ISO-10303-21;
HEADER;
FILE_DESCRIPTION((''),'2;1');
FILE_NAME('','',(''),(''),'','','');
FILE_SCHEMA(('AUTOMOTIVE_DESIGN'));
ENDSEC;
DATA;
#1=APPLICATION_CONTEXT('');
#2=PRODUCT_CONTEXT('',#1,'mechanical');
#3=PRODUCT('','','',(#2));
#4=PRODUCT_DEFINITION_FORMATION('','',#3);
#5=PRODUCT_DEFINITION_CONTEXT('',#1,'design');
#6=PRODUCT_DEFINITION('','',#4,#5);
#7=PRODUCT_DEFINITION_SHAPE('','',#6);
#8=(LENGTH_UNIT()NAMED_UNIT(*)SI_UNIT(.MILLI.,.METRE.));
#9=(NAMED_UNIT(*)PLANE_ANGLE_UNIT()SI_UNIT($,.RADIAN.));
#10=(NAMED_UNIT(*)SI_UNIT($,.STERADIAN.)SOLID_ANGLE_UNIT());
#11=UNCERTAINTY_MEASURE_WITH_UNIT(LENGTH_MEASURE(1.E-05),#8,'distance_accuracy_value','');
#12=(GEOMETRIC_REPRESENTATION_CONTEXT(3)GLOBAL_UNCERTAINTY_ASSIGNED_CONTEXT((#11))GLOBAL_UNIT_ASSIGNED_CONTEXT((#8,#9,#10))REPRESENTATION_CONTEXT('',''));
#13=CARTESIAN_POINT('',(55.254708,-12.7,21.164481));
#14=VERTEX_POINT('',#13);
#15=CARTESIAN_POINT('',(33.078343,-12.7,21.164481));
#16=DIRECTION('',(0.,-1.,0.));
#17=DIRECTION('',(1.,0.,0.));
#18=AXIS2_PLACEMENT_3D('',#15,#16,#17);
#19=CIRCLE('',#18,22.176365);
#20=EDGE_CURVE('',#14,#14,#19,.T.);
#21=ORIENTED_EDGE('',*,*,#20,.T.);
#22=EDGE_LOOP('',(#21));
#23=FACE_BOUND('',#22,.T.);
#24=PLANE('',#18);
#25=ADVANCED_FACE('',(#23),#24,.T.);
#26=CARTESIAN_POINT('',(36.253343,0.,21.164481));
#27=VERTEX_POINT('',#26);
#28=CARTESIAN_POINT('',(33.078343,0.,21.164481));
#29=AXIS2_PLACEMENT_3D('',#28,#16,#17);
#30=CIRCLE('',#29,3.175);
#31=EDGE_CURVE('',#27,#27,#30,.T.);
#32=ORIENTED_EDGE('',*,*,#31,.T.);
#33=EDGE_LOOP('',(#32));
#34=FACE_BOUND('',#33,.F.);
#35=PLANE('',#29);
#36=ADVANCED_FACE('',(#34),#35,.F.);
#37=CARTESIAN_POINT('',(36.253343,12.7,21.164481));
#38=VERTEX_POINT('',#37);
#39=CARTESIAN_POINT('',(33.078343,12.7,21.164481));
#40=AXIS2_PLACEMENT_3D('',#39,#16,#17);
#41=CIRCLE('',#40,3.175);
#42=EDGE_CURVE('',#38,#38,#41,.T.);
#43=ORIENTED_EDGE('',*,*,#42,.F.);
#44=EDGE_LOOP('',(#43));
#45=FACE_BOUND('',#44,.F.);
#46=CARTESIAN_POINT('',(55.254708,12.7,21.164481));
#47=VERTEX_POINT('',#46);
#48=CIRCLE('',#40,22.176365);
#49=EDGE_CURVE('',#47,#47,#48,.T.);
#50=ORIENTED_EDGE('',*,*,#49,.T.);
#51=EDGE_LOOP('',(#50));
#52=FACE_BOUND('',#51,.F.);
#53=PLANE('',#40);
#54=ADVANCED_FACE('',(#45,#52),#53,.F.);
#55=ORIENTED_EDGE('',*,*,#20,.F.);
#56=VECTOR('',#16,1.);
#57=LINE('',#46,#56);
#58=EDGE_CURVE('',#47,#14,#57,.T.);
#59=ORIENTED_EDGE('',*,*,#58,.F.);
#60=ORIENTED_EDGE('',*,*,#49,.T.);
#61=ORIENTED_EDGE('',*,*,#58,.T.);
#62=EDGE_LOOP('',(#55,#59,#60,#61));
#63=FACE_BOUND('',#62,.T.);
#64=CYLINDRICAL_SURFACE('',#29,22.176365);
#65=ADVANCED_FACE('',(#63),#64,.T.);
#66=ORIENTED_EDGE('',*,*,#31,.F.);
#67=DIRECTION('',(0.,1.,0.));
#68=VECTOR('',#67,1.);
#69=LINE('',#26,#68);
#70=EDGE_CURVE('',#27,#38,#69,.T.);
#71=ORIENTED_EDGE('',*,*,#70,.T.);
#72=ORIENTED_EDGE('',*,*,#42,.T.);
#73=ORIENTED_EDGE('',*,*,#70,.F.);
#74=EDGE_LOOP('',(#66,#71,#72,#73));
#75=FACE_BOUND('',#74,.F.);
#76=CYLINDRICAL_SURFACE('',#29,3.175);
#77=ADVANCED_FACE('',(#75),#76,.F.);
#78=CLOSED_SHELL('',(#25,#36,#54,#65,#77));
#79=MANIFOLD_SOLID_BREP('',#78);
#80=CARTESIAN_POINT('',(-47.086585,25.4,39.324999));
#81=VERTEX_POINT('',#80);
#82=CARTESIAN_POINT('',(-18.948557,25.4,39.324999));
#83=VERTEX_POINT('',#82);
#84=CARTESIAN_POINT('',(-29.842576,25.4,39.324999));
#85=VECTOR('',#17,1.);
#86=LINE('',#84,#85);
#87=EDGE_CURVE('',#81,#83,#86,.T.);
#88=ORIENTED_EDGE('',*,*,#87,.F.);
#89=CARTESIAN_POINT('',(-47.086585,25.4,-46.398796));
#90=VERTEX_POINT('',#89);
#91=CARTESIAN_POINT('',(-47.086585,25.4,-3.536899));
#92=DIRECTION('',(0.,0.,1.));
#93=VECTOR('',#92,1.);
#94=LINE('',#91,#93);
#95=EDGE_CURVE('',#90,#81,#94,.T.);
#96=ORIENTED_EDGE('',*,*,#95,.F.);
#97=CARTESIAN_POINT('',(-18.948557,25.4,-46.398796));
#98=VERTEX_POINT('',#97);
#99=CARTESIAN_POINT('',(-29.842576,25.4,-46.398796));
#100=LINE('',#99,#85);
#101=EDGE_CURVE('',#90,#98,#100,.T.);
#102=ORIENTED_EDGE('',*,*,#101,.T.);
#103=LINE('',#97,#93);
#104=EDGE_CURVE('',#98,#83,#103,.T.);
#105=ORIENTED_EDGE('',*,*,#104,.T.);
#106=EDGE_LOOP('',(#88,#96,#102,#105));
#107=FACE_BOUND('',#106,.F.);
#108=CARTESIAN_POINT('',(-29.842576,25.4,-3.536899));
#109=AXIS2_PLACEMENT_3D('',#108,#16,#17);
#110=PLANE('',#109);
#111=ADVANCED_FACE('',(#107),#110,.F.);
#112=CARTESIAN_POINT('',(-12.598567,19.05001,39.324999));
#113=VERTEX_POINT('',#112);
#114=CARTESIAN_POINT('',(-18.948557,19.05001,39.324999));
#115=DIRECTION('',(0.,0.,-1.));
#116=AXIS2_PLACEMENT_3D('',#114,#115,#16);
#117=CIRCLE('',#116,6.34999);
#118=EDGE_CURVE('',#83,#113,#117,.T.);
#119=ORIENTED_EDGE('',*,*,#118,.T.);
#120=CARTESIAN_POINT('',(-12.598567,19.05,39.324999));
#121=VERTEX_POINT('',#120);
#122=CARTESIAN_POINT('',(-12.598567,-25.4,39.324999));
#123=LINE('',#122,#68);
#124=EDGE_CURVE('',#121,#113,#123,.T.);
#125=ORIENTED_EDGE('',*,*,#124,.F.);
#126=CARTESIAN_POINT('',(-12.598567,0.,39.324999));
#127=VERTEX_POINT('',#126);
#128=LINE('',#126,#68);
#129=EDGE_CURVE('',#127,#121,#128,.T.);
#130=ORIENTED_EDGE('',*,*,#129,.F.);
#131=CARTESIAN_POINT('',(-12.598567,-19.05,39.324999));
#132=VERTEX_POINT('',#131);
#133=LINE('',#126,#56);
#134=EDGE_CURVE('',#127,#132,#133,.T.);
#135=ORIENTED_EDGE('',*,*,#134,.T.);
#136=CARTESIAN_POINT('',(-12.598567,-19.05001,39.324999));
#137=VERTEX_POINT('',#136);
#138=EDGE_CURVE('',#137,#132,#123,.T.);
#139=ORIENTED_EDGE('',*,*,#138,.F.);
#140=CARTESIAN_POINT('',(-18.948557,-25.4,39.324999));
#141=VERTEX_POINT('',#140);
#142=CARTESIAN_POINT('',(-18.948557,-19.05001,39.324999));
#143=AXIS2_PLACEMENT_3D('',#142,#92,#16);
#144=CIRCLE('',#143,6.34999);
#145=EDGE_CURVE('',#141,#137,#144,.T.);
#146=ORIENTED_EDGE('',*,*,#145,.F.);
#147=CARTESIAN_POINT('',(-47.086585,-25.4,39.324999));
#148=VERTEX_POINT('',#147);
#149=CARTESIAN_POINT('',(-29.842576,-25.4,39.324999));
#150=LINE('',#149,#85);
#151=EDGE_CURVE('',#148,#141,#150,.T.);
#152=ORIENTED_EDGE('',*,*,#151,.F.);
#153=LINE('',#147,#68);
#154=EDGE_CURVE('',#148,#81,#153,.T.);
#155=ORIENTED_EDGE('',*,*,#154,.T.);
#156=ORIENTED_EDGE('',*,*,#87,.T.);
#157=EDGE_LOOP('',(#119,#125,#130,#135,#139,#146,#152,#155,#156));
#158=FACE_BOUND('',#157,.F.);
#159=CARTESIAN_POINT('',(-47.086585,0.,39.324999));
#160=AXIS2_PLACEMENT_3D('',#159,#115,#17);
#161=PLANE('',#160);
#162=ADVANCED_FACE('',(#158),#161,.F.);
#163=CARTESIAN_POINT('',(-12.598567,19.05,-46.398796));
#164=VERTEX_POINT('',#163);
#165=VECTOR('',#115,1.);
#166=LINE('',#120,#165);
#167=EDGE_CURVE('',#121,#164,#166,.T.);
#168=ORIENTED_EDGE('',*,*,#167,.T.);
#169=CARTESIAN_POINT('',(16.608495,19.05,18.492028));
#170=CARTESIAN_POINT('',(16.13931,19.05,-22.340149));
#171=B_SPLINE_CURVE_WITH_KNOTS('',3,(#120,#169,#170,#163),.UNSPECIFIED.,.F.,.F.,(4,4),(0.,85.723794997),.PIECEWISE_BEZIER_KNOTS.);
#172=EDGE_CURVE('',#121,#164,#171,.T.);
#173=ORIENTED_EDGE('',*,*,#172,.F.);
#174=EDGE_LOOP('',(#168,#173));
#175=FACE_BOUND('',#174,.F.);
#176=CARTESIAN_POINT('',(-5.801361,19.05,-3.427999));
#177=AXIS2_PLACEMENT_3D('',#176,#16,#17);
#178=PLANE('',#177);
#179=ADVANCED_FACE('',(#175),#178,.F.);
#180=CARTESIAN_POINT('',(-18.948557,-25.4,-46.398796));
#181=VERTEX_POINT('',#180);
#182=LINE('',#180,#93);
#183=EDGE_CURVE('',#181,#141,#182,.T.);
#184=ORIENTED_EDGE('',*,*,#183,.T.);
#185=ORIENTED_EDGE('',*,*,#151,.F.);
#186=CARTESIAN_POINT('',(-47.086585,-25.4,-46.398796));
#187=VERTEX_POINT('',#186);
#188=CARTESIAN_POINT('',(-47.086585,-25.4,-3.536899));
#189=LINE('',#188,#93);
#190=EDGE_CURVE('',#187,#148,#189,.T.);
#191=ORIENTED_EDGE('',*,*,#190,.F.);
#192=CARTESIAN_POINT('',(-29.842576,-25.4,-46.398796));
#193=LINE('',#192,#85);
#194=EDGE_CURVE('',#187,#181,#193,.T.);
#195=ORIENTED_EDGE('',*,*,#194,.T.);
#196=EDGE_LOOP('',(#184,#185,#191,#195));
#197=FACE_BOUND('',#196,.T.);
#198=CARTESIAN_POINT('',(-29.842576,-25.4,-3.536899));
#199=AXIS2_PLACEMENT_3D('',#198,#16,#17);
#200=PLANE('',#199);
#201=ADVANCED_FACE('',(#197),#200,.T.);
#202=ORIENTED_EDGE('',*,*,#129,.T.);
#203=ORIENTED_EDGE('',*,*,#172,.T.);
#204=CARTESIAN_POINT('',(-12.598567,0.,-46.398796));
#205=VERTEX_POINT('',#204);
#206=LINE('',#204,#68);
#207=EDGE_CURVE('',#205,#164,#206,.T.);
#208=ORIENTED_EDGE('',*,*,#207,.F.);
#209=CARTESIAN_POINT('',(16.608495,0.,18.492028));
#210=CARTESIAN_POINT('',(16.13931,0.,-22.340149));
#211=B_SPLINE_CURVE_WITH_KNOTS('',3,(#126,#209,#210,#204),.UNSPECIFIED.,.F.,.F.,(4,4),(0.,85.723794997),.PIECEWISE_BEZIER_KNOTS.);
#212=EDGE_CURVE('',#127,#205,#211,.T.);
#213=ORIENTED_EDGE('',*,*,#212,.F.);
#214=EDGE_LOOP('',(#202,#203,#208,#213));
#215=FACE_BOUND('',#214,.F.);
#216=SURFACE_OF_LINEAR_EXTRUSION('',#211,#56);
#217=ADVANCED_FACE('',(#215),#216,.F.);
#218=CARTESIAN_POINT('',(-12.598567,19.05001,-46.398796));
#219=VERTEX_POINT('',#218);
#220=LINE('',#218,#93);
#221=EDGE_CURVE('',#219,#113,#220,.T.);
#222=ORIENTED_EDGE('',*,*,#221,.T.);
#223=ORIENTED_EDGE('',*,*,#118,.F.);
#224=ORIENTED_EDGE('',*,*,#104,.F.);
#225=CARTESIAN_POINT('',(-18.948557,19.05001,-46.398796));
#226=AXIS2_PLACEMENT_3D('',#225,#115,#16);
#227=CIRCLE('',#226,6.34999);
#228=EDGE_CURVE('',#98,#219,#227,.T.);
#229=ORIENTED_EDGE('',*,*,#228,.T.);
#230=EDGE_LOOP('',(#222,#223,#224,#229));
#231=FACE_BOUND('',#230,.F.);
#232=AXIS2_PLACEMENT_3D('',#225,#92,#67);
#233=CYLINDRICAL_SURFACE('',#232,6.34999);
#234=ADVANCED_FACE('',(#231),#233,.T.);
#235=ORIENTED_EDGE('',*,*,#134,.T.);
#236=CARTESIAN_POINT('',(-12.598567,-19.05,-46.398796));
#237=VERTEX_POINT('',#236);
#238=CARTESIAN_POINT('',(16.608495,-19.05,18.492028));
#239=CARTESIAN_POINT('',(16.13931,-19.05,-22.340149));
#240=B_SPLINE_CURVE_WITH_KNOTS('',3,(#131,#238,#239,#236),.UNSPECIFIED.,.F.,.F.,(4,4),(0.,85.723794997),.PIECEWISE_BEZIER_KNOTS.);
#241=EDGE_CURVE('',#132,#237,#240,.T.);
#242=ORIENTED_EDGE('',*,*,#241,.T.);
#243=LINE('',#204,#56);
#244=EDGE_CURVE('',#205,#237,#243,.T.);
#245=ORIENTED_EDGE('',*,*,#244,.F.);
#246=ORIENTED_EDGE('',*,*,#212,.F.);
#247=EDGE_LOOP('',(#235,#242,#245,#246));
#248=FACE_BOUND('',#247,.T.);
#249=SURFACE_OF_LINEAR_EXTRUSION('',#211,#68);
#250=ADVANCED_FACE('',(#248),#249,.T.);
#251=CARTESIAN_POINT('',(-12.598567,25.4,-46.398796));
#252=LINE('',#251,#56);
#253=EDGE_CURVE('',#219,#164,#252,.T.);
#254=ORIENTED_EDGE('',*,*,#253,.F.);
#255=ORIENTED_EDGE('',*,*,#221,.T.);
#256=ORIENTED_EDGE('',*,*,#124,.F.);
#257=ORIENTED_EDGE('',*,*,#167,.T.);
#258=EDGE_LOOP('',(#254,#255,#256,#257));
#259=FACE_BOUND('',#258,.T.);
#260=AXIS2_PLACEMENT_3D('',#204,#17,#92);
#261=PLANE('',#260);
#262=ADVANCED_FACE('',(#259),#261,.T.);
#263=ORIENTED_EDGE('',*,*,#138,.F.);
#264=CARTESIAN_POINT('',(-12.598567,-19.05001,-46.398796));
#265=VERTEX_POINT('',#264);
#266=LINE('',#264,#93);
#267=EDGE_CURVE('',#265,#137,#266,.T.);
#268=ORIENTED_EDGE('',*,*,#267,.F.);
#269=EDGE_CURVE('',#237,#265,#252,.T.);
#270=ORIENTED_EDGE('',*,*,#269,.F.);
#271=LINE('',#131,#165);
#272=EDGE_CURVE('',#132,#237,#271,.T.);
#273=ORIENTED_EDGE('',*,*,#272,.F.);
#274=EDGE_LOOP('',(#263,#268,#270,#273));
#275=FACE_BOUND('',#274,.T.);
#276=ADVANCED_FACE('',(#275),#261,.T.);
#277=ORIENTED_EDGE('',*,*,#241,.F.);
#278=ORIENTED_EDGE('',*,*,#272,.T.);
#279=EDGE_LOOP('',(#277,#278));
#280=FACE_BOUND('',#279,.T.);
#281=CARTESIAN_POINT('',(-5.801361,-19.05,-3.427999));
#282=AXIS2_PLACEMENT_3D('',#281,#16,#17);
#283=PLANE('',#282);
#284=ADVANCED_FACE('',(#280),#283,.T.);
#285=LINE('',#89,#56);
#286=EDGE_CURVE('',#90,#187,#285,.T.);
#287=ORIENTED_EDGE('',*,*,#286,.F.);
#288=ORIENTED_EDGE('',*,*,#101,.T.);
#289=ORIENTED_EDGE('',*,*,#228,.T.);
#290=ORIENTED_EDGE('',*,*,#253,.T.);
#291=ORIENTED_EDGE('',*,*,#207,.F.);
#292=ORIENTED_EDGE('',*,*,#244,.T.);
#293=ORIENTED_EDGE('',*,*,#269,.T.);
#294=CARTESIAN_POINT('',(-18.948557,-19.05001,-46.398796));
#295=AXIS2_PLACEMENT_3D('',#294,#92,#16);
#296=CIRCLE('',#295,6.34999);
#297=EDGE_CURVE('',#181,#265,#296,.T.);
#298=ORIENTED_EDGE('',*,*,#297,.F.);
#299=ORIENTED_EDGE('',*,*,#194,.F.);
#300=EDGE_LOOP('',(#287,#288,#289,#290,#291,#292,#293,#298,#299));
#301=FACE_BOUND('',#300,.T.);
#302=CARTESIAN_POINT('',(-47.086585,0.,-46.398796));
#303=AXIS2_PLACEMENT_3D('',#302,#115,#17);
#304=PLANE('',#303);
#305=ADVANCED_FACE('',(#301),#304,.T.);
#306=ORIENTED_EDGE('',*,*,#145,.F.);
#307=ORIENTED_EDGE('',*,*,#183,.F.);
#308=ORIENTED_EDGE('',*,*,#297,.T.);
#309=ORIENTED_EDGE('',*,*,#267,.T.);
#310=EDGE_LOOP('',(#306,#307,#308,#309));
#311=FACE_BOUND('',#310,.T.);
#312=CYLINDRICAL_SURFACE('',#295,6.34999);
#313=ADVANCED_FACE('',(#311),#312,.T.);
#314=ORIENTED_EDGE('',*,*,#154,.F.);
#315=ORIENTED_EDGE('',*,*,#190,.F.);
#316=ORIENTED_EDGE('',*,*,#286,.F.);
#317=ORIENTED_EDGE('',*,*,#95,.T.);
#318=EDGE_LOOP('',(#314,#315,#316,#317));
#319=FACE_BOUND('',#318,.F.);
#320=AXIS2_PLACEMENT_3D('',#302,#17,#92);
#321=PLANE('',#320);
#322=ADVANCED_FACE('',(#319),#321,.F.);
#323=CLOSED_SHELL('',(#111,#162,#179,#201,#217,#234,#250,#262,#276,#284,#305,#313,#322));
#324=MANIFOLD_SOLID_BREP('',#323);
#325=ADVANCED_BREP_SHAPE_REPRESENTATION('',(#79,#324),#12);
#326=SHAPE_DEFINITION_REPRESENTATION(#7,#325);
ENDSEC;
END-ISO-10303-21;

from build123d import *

# Parameters (mm, degrees)
F0_W     = 34.4880186021
F0_H     = 85.7237949967
F1_DEPTH = 25.4
F2_DEPTH = 19.05
F3_R     = 6.34999
F0_R     = 22.1763652159
F0_R_2   = 9.4763652159
F4_DEPTH = 12.7
F5_DEPTH = 12.7
F6_D     = 6.35
F6_DEPTH = 25.401


# Not quite as in the source:
# - a fillet or chamfer is up to 0.001 mm smaller than in the source, because OpenCascade refuses the exact size


with BuildPart() as f1:
    # F0 (on Front) → F1 (new body, symmetric)
    with BuildSketch(Plane.XZ):
        with Locations((-29.842576012, -3.5368986428)):
            Rectangle(F0_W, F0_H)
    extrude(amount=F1_DEPTH, both=True)

    # F0 (on Front) → F2 (join, symmetric)
    with BuildSketch(Plane.XZ):
        with BuildLine():
            Line((-12.5985667109, 39.3249988556), (-12.5985667109, -46.3987961411))
            add(Edge.make_bspline(
                [(-12.5985667109, 39.3249988556), (16.6084952652, 18.4920281172), (16.1393098533, -22.3401486874), (-12.5985667109, -46.3987961411)],
                knots=[0, 0, 0, 0, 85.7237949967, 85.7237949967, 85.7237949967, 85.7237949967], degree=3))
        make_face()
    extrude(amount=F2_DEPTH, both=True)

    # F3 (radius 6.35 in the source; OpenCascade refuses exactly that, so slightly less here)
    f3_edges = [f1.edges().sort_by_distance(p)[0] for p in [
        (-12.598567, -25.4, -3.536899),
        (-12.598567, 25.4, -3.536899),
    ]]
    fillet(f3_edges, radius=F3_R)


with BuildPart() as f4:
    # F0 (on Front) → F4 (new body, symmetric)
    with BuildSketch(Plane.XZ):
        with Locations((33.0783426762, 21.1644805968)):
            Circle(F0_R)
        with Locations((33.0783426762, 21.1644805968)):
            Circle(F0_R_2, mode=Mode.SUBTRACT)
    extrude(amount=F4_DEPTH, both=True)

    # F0 (on Front) → F5 (join, symmetric)
    with BuildSketch(Plane.XZ):
        with Locations((33.0783426762, 21.1644805968)):
            Circle(F0_R_2)
    extrude(amount=F5_DEPTH, both=True)

    # F6 (through all, one way)
    with BuildSketch(Plane.XZ):
        with Locations((33.0783426762, 21.1644805968)):
            Circle(F6_D / 2)
    extrude(amount=-F6_DEPTH, mode=Mode.SUBTRACT)


solid = Compound([f1.part, f4.part])
